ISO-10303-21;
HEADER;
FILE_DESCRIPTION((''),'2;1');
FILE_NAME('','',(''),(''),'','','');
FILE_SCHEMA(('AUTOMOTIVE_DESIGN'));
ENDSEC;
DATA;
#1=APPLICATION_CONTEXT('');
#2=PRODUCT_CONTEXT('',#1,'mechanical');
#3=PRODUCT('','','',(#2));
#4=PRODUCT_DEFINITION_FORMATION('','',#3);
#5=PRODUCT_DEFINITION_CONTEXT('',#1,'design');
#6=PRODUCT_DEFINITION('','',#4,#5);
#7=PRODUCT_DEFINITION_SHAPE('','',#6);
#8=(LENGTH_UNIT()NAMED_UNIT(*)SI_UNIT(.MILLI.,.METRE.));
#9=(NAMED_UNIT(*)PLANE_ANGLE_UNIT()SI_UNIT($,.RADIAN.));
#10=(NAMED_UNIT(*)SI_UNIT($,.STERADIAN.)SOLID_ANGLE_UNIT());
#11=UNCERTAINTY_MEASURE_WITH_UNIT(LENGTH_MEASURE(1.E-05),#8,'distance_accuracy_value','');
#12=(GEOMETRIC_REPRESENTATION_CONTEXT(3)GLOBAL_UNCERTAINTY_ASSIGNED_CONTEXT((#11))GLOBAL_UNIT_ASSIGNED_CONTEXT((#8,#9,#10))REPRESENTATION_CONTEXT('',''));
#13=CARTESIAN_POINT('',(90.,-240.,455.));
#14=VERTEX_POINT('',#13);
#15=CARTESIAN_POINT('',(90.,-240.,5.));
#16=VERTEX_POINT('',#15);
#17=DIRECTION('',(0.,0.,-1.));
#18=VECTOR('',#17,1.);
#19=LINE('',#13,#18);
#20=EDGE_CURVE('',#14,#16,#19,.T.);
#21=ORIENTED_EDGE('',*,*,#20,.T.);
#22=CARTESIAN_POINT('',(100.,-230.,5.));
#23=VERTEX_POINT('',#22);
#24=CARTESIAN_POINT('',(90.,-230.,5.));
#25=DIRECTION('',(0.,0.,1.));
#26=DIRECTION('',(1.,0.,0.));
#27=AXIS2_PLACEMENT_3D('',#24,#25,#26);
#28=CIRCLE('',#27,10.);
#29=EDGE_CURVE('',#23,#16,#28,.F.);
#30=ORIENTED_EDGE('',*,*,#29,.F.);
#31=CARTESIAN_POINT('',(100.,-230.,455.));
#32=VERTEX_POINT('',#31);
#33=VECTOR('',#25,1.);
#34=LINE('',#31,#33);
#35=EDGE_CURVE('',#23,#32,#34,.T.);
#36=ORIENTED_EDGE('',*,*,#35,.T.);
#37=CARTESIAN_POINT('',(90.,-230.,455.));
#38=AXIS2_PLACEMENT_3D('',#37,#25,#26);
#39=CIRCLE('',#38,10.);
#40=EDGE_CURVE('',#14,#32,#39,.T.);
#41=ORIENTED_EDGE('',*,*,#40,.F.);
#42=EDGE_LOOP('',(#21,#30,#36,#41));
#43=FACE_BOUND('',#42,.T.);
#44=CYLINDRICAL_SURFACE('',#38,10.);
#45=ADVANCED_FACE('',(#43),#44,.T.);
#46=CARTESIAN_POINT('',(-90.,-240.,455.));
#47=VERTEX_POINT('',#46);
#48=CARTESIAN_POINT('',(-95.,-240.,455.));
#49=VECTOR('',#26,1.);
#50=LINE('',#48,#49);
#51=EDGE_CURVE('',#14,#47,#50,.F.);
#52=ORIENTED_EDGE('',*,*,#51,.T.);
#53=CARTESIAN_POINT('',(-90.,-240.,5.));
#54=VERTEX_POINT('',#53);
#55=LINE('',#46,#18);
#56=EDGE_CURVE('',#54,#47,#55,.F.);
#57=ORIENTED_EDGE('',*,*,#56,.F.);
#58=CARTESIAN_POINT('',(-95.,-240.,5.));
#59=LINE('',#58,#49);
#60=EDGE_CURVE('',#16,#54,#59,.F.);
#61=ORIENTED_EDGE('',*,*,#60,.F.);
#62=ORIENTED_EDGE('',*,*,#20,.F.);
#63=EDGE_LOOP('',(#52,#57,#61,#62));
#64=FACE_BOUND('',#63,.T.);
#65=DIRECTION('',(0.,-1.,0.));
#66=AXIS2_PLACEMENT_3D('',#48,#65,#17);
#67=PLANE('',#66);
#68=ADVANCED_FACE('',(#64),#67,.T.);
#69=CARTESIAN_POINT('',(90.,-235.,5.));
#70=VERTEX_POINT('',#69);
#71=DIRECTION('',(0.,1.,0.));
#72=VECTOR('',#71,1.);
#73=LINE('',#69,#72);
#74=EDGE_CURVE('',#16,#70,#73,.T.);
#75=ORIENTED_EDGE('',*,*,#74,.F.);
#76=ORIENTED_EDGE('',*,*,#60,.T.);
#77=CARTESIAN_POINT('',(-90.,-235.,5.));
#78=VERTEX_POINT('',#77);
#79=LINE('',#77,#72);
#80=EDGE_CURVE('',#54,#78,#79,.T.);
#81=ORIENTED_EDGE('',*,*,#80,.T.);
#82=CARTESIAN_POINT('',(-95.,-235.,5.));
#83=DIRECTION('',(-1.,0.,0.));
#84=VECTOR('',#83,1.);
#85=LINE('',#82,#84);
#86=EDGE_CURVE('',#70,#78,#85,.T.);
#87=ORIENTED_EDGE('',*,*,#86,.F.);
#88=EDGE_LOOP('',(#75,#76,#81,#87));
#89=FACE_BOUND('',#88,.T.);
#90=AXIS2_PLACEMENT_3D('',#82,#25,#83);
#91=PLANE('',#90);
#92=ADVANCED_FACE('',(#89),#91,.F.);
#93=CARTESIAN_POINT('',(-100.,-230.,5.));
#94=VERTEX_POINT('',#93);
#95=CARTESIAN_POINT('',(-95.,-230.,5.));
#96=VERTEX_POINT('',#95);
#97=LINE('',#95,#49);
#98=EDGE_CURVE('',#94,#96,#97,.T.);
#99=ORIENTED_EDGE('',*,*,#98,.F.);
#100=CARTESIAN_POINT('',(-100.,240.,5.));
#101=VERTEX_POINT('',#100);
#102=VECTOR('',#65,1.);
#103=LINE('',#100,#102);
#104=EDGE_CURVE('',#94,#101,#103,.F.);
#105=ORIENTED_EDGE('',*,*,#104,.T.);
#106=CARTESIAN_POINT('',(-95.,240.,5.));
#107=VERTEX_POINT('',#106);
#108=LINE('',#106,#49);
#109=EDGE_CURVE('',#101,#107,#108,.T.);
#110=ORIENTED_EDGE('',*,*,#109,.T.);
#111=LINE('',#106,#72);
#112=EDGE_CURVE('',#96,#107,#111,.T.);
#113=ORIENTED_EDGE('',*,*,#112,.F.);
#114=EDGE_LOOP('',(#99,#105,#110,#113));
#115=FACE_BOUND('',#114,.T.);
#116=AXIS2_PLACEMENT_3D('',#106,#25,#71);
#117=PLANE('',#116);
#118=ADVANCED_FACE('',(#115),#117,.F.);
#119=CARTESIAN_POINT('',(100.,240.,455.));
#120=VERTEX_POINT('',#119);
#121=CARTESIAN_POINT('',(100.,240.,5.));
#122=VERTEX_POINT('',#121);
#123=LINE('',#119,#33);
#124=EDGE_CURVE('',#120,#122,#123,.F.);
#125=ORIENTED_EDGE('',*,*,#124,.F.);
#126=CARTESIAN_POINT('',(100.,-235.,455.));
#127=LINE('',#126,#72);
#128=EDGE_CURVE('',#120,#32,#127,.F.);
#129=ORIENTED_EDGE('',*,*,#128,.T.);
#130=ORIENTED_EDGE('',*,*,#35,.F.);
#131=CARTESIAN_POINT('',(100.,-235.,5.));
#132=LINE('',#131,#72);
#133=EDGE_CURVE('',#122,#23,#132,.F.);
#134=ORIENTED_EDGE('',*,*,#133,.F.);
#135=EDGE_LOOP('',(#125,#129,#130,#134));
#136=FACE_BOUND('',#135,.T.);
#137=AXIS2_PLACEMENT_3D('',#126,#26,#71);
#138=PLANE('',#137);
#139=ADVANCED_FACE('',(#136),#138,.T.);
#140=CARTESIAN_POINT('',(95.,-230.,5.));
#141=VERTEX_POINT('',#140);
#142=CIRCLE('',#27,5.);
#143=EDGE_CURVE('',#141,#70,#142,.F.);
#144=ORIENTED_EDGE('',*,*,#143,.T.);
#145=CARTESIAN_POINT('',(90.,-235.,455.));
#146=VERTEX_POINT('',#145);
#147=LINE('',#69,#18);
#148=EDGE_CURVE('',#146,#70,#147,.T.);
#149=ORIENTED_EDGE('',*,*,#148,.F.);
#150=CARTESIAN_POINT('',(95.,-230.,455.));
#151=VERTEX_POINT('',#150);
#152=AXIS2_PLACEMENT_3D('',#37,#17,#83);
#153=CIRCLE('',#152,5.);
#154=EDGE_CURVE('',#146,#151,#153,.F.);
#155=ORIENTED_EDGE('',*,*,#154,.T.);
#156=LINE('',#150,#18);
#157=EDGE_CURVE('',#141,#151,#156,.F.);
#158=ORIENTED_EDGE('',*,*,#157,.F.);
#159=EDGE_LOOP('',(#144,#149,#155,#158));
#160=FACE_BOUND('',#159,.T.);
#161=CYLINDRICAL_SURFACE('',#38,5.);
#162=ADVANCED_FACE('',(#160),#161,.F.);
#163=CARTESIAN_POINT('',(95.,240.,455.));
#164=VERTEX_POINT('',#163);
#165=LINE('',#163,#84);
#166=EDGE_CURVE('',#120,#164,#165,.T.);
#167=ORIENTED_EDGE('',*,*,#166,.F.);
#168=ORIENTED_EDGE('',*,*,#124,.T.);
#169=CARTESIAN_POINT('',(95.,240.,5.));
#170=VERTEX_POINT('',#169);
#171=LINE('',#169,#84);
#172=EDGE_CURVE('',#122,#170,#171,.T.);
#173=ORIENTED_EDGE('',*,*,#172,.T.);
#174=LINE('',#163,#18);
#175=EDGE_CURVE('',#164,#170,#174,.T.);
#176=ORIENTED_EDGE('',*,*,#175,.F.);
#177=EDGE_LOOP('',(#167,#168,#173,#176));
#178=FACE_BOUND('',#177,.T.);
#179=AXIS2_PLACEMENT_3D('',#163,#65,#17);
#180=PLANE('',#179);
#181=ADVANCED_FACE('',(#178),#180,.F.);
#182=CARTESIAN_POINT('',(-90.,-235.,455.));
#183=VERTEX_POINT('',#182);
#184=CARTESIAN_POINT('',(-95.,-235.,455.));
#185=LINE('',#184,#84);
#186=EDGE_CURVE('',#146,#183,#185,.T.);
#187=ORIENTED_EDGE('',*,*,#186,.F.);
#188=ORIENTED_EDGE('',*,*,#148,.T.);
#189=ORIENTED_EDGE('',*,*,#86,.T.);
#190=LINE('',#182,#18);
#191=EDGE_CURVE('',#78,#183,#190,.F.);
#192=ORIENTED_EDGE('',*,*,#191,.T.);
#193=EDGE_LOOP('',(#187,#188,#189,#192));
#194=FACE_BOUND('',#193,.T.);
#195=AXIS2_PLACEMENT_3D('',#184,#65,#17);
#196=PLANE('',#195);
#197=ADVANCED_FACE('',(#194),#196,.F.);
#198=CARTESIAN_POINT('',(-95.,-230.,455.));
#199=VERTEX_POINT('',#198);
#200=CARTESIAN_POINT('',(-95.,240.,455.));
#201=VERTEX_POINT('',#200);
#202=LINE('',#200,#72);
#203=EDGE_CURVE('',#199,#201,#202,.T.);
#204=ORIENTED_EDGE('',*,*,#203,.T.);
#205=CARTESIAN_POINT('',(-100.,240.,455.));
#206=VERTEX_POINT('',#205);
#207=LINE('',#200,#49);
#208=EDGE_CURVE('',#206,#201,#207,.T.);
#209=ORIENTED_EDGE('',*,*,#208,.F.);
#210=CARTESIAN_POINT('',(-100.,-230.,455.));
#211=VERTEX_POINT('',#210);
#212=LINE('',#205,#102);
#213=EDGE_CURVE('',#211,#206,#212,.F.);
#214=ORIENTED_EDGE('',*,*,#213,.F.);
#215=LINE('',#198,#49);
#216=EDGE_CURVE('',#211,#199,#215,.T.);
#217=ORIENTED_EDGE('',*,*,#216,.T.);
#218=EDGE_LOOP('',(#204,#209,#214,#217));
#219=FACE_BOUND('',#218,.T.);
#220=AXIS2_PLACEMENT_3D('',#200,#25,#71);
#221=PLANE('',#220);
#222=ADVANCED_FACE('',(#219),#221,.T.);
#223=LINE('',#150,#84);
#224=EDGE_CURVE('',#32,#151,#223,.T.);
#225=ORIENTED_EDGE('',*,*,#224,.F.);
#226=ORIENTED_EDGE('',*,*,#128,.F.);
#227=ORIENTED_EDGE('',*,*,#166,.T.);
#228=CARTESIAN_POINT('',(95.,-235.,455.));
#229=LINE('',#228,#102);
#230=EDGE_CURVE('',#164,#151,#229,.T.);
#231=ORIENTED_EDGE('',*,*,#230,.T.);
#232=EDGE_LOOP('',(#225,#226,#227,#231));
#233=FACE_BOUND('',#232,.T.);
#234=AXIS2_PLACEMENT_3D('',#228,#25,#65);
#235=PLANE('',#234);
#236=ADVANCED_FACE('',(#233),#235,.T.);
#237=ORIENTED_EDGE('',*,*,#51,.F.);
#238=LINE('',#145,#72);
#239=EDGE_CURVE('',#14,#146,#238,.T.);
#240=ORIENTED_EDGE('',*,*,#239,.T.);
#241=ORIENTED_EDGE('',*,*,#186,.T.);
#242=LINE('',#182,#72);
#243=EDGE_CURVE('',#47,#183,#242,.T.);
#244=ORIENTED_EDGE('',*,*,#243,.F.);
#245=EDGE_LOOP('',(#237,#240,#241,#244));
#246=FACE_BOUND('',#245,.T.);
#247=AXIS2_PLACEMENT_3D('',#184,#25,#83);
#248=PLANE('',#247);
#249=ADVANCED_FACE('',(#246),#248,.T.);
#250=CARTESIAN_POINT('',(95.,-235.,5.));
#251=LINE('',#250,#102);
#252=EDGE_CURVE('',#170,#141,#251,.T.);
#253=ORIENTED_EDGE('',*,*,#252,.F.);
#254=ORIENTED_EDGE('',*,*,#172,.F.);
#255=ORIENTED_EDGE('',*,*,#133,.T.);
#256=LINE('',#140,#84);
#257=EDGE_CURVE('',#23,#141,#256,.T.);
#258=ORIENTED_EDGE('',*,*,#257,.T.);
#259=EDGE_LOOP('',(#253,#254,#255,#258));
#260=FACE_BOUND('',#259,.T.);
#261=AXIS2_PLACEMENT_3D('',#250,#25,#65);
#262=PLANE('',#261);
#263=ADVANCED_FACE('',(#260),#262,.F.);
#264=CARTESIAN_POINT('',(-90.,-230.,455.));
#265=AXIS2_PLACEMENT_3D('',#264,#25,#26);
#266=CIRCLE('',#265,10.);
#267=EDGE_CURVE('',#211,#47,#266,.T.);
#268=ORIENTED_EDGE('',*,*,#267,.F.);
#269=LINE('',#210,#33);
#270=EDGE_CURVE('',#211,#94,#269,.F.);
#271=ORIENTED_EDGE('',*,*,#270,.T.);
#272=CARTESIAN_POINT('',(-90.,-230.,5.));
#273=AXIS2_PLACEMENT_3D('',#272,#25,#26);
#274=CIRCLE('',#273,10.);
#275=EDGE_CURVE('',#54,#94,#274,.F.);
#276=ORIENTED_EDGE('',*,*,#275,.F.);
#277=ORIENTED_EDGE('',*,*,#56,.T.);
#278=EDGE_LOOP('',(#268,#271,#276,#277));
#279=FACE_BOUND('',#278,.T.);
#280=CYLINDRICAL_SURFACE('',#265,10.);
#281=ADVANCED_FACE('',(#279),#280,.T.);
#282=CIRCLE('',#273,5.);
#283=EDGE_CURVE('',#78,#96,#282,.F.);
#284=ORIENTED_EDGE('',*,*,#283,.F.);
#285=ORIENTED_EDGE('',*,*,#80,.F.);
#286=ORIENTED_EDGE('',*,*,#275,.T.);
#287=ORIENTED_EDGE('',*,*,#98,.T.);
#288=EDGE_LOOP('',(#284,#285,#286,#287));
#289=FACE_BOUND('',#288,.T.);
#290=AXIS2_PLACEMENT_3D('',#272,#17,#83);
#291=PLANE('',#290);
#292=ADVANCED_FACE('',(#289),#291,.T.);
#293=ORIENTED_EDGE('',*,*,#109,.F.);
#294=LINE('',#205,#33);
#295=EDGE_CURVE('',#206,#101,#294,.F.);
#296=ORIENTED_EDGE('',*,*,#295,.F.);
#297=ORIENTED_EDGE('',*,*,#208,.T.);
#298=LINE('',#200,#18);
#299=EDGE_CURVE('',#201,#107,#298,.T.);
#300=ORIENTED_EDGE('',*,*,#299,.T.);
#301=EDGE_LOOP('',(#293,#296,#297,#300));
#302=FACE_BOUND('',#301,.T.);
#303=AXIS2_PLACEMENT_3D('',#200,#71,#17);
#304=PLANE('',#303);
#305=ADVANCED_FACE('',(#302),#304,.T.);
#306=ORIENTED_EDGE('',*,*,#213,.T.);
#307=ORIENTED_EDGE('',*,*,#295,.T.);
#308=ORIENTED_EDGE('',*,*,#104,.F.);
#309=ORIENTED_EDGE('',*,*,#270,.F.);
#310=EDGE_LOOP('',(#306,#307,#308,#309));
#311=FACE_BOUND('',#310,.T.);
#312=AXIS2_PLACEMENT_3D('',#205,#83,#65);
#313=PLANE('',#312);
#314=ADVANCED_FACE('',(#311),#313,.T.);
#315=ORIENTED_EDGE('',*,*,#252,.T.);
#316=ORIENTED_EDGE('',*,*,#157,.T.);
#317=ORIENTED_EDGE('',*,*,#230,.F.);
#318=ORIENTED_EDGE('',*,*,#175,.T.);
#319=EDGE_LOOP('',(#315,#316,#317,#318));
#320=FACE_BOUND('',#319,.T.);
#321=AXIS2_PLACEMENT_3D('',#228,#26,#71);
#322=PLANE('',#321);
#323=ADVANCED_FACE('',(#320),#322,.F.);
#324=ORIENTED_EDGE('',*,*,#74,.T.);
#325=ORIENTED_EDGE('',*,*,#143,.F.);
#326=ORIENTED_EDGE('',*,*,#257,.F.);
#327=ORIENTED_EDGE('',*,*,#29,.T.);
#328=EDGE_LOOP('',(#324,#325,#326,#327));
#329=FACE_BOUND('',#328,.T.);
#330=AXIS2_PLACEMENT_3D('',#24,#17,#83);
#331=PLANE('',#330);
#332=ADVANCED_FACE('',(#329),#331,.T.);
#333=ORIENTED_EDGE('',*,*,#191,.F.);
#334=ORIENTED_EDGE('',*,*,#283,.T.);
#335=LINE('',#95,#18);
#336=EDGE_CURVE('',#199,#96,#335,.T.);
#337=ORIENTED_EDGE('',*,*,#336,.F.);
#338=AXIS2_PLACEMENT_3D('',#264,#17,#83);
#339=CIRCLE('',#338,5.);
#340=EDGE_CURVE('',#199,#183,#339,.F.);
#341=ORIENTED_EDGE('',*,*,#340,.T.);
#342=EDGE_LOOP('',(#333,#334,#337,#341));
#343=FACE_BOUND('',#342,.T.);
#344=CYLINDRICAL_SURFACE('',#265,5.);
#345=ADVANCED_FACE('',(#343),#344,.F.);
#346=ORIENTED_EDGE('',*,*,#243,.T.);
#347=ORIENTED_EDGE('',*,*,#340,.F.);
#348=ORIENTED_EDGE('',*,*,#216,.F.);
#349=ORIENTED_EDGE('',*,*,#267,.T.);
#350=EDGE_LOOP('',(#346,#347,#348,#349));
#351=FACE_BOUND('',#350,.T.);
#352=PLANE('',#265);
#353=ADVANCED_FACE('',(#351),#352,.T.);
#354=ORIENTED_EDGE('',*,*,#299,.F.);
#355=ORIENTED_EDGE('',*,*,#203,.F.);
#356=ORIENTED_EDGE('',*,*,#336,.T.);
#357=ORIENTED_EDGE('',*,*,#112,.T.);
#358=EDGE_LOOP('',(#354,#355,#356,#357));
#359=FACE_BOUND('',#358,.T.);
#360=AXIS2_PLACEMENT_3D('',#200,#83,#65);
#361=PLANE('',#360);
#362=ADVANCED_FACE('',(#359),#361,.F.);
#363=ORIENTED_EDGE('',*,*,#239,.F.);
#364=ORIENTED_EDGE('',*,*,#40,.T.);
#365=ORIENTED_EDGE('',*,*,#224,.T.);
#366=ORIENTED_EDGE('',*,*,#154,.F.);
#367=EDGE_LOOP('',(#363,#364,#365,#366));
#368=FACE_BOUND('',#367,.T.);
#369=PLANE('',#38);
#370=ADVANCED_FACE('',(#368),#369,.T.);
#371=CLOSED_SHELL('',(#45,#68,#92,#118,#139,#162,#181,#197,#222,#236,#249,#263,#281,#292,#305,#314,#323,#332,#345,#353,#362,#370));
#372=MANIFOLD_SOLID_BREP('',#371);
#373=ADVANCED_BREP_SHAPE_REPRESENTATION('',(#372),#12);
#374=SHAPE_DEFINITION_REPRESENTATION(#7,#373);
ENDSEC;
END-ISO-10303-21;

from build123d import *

# Parameters (mm, degrees)
SKETCH_1_W            = 200
SKETCH_1_H            = 480
EXTRUDE_1_DEPTH       = 5
FILLET_1_R            = 5
EXTRUDE_START         = 450
EXTRUDE_3_DEPTH       = 450
CUT_EXTRUDE_START     = -5
CUT_EXTRUDE_2_DEPTH   = 5
SHEET_START           = 5
SHEET_METAL_3_DEPTH   = 450
SHEET_METAL_3_2_DEPTH = 450


# Read off the part's stored shape, not the designer's step: 转换实体3
with BuildPart() as part:
    # 草图1 → 凸台-拉伸1 (new body)
    with BuildSketch(Plane.XY):
        Rectangle(SKETCH_1_W, SKETCH_1_H)
    extrude(amount=EXTRUDE_1_DEPTH)

    # 圆角1
    fillet_1_edges = [part.edges().sort_by_distance(p)[0] for p in [
        (100, -240, 2.5),
        (-100, -240, 2.5),
    ]]
    fillet(fillet_1_edges, radius=FILLET_1_R)

    # 草图4 → 凸台-拉伸3 (add)
    with BuildSketch(Plane.XY.offset(5).offset(EXTRUDE_START)):
        with BuildLine():
            Line((-95, 240), (-95, -235))
            Line((-95, -235), (95, -235))
            Line((95, -235), (95, 240))
            Line((95, 240), (100, 240))
            Line((100, 240), (100, -235))
            ThreePointArc((100, -235), (98.535533906, -238.535533906), (95, -240))
            Line((95, -240), (-95, -240))
            ThreePointArc((-95, -240), (-98.535533906, -238.535533906), (-100, -235))
            Line((-100, -235), (-100, 240))
            Line((-100, 240), (-95, 240))
        make_face()
    extrude(amount=-EXTRUDE_3_DEPTH)

    # Sketch 5 → 切除-拉伸2 (cut)
    with BuildSketch(Plane(origin=(0, 0, 0), x_dir=(-1, 0, 0), z_dir=(0, 0, -1)).offset(CUT_EXTRUDE_START)):
        with BuildLine():
            Line((-95, -240), (95, -240))
            ThreePointArc((95, -240), (98.535533906, -238.535533906), (100, -235))
            Line((100, -235), (100, 240))
            Line((100, 240), (-100, 240))
            Line((-100, 240), (-100, -235))
            ThreePointArc((-100, -235), (-98.535533906, -238.535533906), (-95, -240))
        make_face()
    extrude(amount=CUT_EXTRUDE_2_DEPTH, mode=Mode.SUBTRACT)

    # Sheet Metal 3 outline → Sheet Metal 3 (cut)
    with BuildSketch(Plane.XY.offset(SHEET_START)):
        with BuildLine():
            Line((-95, -240), (-90, -240))
            ThreePointArc((-90, -240), (-97.071067812, -237.071067812), (-100, -230))
            Line((-100, -230), (-100, -235))
            ThreePointArc((-100, -235), (-98.535533906, -238.535533906), (-95, -240))
        make_face()
        with BuildLine():
            ThreePointArc((100, -230), (97.071067812, -237.071067812), (90, -240))
            Line((90, -240), (95, -240))
            ThreePointArc((95, -240), (98.535533906, -238.535533906), (100, -235))
            Line((100, -235), (100, -230))
        make_face()
    extrude(amount=SHEET_METAL_3_DEPTH, mode=Mode.SUBTRACT)

    # Sheet Metal 3 2 outline → Sheet Metal 3 2 (add)
    with BuildSketch(Plane.XY.offset(SHEET_START)):
        with BuildLine():
            Line((-95, -235), (-90, -235))
            ThreePointArc((-90, -235), (-93.535533906, -233.535533906), (-95, -230))
            Line((-95, -230), (-95, -235))
        make_face()
        with BuildLine():
            ThreePointArc((95, -230), (93.535533906, -233.535533906), (90, -235))
            Line((90, -235), (95, -235))
            Line((95, -235), (95, -230))
        make_face()
    extrude(amount=SHEET_METAL_3_2_DEPTH)


solid = part.part
